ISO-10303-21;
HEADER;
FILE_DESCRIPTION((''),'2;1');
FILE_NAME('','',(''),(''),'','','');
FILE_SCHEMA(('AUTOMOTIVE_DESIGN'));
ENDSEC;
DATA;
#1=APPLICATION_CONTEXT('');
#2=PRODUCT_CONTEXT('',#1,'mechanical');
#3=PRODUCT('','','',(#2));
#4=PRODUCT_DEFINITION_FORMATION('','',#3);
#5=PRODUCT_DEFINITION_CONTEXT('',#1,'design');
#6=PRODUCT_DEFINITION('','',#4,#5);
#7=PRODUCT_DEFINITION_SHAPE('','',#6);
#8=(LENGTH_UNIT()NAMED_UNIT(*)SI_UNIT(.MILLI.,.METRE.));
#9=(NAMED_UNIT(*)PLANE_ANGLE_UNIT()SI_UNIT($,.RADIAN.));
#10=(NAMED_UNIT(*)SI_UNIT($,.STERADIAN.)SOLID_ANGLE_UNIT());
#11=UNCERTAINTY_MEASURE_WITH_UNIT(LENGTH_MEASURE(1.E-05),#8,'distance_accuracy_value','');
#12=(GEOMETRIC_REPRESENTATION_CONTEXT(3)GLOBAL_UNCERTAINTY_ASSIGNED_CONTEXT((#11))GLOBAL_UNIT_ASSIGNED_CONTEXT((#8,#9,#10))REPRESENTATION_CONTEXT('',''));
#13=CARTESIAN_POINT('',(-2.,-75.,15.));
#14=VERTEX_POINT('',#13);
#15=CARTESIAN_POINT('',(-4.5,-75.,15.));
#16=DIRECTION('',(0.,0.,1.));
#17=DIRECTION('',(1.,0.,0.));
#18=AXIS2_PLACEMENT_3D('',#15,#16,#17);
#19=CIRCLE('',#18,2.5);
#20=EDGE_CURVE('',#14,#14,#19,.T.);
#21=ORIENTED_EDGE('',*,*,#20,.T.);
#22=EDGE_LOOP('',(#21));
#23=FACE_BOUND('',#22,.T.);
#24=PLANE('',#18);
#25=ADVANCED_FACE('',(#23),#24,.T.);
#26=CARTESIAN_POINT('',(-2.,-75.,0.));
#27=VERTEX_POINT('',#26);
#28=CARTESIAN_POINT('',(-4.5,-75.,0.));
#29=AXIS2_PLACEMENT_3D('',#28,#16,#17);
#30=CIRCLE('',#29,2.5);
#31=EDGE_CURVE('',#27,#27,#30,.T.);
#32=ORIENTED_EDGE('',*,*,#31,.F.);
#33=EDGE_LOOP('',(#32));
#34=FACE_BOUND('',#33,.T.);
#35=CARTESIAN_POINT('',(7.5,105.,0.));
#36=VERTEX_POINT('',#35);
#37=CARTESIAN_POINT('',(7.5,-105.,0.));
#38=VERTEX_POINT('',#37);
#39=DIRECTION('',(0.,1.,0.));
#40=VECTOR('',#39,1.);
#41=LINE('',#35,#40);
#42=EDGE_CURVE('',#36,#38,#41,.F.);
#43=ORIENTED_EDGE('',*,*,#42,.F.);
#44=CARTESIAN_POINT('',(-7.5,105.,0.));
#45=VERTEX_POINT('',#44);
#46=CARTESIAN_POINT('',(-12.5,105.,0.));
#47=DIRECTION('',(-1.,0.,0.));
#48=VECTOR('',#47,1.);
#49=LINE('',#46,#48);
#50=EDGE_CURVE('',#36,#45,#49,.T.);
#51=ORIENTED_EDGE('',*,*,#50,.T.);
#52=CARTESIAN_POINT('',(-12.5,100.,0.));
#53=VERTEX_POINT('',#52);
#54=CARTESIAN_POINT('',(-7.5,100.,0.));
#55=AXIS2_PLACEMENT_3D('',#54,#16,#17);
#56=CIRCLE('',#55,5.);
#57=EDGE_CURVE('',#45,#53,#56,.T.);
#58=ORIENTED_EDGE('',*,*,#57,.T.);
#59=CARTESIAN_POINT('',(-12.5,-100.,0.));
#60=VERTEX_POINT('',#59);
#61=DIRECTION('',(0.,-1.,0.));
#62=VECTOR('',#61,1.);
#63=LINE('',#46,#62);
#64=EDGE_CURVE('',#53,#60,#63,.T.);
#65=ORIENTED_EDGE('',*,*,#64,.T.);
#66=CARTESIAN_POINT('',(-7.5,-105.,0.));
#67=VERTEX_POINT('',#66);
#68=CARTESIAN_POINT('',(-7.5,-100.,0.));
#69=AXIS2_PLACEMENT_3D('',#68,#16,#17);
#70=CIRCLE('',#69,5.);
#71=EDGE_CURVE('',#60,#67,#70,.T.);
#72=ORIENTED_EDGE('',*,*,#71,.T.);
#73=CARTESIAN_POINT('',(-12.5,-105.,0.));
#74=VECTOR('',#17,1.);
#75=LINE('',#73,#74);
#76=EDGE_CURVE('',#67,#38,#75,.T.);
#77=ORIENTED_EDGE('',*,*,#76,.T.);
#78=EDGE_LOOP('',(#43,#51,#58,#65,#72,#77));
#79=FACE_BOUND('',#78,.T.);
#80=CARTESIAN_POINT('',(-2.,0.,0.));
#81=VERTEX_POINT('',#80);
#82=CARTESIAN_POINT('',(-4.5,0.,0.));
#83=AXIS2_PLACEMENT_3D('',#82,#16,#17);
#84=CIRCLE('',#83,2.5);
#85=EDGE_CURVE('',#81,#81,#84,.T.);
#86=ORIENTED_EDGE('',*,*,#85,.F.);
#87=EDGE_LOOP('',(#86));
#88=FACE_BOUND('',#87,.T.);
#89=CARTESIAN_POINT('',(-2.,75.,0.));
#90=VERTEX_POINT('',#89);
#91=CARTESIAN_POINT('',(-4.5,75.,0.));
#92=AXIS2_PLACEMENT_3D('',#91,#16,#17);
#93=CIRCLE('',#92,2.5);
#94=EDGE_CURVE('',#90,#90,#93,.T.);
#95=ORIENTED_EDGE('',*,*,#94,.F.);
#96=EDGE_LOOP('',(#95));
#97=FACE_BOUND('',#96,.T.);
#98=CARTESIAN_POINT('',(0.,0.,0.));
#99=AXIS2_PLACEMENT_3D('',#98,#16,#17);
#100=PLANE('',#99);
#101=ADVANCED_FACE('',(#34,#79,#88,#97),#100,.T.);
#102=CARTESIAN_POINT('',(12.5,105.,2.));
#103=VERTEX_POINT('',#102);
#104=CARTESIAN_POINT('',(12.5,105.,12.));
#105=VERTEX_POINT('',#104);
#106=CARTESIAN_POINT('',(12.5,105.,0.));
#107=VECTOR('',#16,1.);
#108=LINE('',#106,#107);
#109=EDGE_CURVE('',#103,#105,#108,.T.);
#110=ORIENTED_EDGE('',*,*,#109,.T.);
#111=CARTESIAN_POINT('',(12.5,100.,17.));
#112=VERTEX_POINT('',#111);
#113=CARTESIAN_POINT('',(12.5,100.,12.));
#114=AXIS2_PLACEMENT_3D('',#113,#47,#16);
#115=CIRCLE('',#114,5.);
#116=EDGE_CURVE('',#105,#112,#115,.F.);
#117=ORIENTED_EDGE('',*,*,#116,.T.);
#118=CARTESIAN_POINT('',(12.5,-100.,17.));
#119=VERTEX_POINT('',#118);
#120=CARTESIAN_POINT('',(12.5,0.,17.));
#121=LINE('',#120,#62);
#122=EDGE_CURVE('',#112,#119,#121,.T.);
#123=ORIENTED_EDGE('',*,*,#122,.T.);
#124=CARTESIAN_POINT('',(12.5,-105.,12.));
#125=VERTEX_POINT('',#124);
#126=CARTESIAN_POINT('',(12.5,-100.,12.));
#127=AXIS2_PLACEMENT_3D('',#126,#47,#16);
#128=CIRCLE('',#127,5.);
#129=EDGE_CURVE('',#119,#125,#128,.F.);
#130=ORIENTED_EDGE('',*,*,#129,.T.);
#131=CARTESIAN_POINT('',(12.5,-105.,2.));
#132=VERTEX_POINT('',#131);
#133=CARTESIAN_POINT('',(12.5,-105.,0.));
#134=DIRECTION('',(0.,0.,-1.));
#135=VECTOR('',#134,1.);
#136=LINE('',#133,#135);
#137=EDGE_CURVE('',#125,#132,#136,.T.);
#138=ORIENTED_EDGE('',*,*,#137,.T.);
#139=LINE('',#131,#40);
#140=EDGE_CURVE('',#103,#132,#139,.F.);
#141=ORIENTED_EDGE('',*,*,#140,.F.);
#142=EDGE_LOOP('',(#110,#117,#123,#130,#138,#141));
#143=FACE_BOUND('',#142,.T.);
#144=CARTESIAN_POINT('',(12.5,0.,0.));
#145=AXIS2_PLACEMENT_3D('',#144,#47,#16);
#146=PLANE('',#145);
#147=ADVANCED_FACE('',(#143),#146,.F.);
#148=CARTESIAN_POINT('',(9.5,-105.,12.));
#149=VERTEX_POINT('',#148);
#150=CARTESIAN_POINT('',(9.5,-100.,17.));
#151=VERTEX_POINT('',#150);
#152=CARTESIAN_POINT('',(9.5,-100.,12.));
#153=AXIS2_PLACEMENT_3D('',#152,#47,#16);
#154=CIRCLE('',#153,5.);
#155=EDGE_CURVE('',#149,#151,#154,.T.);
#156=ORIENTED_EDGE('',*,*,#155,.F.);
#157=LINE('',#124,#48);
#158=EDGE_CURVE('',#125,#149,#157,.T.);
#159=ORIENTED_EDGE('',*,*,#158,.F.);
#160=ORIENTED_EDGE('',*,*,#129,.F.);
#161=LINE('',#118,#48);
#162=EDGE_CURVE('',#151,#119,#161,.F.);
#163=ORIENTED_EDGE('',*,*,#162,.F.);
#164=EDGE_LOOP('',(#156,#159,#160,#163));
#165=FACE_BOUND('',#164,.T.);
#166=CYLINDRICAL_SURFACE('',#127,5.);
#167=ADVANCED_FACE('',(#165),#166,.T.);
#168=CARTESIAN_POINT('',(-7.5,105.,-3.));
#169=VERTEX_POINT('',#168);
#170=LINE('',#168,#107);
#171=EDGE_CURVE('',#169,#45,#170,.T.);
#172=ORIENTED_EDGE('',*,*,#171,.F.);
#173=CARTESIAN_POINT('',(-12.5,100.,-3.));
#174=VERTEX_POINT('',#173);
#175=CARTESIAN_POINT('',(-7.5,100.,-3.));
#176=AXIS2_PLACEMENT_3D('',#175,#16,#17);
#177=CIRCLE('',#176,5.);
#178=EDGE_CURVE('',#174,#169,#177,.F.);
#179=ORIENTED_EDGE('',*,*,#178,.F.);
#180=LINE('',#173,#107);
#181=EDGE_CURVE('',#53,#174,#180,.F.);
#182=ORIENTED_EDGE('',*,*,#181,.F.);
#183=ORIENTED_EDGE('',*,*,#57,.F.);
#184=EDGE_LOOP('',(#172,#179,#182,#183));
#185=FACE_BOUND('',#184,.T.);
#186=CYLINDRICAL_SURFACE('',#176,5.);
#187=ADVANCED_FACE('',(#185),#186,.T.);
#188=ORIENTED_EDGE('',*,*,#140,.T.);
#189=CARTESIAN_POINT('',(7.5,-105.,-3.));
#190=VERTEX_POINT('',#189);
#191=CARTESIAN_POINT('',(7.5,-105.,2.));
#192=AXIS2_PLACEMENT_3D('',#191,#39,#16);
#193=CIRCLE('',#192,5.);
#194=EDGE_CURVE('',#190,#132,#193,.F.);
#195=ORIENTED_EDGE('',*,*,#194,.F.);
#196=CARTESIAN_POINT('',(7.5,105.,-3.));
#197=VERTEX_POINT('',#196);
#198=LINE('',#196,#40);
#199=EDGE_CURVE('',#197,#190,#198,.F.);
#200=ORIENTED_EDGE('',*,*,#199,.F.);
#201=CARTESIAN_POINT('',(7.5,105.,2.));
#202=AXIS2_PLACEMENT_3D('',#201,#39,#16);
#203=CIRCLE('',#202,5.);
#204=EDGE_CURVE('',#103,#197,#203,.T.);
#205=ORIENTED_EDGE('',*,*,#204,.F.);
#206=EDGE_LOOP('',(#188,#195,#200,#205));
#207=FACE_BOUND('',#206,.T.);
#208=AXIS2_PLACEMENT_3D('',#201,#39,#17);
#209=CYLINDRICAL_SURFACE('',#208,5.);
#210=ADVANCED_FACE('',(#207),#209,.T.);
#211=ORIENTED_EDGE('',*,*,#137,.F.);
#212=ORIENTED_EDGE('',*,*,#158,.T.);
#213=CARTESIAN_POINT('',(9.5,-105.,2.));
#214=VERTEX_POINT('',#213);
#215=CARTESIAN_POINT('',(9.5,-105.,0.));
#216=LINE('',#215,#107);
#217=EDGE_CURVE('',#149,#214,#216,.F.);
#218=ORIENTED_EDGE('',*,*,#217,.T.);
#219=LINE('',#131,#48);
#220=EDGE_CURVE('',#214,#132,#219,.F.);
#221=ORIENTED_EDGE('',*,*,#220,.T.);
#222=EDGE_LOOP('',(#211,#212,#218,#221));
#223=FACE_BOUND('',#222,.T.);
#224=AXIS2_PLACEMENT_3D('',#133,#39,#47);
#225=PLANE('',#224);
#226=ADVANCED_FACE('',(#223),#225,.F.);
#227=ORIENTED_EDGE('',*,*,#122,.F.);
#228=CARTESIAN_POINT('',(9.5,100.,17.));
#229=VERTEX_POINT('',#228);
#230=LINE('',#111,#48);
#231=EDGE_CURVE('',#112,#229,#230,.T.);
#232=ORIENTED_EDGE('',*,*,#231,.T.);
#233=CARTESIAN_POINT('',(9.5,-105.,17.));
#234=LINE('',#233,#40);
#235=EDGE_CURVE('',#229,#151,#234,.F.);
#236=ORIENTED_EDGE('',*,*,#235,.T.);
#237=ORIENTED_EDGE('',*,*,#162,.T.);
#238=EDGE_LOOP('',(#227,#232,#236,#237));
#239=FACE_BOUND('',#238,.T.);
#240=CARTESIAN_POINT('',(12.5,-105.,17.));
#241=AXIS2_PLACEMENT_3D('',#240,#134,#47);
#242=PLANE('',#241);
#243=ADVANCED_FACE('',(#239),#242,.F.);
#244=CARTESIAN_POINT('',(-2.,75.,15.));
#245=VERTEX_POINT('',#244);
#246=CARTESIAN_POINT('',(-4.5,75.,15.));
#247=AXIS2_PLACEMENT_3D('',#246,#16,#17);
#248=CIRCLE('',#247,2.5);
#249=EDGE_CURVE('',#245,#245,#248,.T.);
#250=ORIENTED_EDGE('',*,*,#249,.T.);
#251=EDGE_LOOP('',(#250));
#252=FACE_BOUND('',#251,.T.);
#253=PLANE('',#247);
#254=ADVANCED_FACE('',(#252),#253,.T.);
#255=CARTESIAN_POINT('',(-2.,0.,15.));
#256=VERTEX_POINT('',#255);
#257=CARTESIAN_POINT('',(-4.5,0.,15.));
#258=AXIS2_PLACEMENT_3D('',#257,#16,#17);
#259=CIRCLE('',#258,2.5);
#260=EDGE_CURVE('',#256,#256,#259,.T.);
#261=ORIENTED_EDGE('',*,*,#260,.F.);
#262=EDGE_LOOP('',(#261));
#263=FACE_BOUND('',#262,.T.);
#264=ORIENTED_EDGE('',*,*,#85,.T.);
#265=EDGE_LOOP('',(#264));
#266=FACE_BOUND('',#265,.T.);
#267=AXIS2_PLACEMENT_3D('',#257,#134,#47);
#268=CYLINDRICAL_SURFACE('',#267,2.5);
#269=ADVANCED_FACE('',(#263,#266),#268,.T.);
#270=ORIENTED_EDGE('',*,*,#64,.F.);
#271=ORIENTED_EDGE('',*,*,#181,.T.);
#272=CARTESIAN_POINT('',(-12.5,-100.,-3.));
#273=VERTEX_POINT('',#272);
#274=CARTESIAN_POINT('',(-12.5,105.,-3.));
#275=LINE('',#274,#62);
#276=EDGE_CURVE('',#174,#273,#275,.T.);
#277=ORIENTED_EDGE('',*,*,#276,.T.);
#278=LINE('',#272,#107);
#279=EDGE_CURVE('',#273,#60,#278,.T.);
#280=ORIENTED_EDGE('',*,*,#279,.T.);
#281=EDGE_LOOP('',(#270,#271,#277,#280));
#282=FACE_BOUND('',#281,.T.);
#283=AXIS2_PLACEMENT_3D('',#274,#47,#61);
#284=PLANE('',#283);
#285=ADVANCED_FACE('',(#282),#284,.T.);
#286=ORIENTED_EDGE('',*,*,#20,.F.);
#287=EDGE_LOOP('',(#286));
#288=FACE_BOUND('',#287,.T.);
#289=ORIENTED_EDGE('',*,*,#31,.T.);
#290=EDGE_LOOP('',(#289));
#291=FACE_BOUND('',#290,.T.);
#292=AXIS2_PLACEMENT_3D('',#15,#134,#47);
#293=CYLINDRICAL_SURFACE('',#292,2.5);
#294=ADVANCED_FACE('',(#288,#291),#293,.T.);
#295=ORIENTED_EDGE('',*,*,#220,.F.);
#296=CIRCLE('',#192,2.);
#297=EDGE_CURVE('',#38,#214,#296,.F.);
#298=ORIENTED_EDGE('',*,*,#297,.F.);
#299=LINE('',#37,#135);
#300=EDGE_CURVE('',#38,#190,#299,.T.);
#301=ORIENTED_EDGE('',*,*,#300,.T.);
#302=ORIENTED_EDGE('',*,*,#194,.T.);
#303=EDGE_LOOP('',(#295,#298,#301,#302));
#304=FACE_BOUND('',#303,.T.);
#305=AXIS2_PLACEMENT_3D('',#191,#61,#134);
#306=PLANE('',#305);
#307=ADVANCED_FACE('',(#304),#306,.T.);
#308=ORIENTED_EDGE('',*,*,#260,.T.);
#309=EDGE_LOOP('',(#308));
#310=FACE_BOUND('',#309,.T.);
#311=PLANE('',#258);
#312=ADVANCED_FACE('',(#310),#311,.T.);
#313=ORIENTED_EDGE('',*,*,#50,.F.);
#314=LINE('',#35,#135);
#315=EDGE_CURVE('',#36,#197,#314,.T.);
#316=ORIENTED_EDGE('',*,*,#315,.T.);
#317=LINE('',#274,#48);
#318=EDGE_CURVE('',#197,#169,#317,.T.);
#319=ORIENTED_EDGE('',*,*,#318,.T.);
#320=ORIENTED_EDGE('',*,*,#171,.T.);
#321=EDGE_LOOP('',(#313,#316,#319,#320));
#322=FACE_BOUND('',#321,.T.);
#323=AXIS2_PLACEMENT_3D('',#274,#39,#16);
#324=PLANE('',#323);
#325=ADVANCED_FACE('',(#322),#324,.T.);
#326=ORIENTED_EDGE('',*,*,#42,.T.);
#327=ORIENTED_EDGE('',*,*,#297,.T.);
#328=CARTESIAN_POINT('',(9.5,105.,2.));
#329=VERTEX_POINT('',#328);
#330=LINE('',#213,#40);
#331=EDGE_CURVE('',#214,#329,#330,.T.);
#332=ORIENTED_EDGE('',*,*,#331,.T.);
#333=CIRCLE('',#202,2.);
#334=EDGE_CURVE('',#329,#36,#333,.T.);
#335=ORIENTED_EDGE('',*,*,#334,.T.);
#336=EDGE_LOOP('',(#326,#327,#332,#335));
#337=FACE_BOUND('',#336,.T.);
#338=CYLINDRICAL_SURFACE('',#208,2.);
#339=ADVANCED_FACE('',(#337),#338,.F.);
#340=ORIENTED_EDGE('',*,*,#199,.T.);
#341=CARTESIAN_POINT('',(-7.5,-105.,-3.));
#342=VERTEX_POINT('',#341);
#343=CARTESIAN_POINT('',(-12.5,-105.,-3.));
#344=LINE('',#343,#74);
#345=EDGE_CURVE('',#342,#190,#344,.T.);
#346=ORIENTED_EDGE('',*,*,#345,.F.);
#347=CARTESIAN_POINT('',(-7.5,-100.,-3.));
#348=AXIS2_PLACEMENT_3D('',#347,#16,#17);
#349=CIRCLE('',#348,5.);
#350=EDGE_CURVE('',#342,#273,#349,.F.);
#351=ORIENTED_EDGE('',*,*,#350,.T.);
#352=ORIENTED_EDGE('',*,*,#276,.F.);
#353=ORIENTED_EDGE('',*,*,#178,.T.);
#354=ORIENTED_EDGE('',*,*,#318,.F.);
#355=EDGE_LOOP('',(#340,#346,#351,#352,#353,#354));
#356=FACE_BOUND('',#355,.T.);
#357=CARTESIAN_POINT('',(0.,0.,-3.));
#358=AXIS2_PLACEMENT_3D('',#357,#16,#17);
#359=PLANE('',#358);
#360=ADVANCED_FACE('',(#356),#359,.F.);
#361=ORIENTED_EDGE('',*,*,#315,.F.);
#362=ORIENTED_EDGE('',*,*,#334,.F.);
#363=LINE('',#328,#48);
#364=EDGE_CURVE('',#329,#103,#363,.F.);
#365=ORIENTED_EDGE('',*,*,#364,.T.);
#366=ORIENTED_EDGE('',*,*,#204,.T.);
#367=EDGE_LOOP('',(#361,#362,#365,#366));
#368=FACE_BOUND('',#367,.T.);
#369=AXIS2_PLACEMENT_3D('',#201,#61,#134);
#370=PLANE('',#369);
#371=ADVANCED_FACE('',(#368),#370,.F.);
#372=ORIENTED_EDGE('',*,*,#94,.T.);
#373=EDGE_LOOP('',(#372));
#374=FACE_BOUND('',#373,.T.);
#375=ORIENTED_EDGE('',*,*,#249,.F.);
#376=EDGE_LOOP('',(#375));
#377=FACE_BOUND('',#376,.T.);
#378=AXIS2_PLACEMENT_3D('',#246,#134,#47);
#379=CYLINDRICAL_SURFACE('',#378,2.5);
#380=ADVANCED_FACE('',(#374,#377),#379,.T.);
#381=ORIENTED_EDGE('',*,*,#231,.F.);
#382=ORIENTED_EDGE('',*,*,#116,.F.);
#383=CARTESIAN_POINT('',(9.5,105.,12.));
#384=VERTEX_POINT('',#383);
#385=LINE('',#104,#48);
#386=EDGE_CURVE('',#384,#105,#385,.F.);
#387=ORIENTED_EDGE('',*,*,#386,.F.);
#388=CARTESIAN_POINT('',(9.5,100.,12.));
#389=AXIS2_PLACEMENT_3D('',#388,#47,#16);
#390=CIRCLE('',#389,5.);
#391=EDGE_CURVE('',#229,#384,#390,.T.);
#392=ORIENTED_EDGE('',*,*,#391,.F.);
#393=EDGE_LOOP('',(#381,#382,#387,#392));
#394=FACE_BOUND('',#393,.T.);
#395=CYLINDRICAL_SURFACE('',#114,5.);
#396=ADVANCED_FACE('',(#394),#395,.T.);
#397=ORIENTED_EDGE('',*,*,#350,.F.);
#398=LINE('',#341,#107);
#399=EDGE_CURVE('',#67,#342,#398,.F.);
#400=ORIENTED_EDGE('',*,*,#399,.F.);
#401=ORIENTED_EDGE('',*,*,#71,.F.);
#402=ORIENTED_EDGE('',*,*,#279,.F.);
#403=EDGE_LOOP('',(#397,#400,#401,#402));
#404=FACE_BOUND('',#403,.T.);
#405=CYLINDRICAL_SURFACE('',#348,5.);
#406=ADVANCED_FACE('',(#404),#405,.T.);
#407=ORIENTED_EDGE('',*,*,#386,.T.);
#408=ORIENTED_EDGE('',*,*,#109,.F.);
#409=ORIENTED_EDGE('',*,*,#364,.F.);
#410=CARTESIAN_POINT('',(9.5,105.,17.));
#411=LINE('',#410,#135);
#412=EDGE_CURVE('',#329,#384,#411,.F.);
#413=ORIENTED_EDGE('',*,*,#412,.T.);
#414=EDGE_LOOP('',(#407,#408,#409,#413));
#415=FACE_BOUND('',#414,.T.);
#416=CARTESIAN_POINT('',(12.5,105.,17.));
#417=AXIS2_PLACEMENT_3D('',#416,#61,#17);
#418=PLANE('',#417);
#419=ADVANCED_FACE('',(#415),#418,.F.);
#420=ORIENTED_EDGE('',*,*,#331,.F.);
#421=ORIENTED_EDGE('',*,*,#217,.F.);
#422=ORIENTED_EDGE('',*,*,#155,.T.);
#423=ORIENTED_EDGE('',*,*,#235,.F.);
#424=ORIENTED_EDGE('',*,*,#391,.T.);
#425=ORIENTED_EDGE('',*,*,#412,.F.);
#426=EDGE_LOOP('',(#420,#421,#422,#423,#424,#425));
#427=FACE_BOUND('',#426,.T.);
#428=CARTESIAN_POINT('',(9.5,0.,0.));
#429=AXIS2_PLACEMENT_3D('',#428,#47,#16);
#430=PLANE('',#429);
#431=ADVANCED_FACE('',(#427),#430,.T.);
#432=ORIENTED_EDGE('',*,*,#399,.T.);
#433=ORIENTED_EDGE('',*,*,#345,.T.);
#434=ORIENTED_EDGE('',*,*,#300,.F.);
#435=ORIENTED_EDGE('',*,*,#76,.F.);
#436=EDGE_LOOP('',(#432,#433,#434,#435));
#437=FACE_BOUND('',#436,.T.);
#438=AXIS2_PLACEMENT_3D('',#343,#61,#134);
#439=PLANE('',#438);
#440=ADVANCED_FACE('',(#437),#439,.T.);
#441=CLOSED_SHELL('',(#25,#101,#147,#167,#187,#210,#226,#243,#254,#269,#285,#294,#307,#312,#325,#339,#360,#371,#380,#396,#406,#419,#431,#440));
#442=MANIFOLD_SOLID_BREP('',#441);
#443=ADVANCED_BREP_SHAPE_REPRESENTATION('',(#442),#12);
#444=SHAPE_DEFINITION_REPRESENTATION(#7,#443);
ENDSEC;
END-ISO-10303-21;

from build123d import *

# Parameters (mm, degrees)
SKETCH_1_W                       = 25
SKETCH_1_H                       = 210
SM_BASE_FLANGE_1_DEPTH           = 3
SM_EDGE_FLANGE_1_STRIP_W         = 16
SM_EDGE_FLANGE_1_STRIP_H         = 3
SM_EDGE_FLANGE_1_STRIP_CUT_DEPTH = 210
SM_EDGE_FLANGE_1_DEPTH           = 210
SKETCH_9_R                       = 2.5
EXTRUDE_1_DEPTH                  = 15
FILLET_1_R                       = 5


# Sheet-metal steps are written as plain solids
with BuildPart() as part:
    # Sketch 1 → 基体-法兰1 (new body)
    with BuildSketch(Plane.XY):
        Rectangle(SKETCH_1_W, SKETCH_1_H)
    extrude(amount=-SM_BASE_FLANGE_1_DEPTH)

    # 边线-法兰1 strip (across the edge) → 边线-法兰1 strip cut (cut)
    with BuildSketch(Plane(origin=(12.5, -105, 0), x_dir=(-1, 0, 0), z_dir=(0, 1, 0))):
        with Locations((-3, -1.5)):
            Rectangle(SM_EDGE_FLANGE_1_STRIP_W, SM_EDGE_FLANGE_1_STRIP_H)
    extrude(amount=SM_EDGE_FLANGE_1_STRIP_CUT_DEPTH, mode=Mode.SUBTRACT)

    # 边线-法兰1 section (across the edge) → 边线-法兰1 (add)
    with BuildSketch(Plane(origin=(12.5, -105, 0), x_dir=(-1, 0, 0), z_dir=(0, 1, 0))):
        with BuildLine():
            Line((0, 2), (0, 17))
            Line((0, 17), (3, 17))
            Line((3, 17), (3, 2))
            ThreePointArc((3, 2), (3.585786438, 0.585786438), (5, 0))
            Line((5, 0), (5, -3))
            ThreePointArc((5, -3), (1.464466094, -1.535533906), (0, 2))
        make_face()
    extrude(amount=SM_EDGE_FLANGE_1_DEPTH)

    # 草图9 → 凸台-拉伸1 (add)
    with BuildSketch(Plane.XY):
        with Locations((-4.5, 0)):
            Circle(SKETCH_9_R)
        with Locations((-4.5, -75)):
            Circle(SKETCH_9_R)
        with Locations((-4.5, 75)):
            Circle(SKETCH_9_R)
    extrude(amount=EXTRUDE_1_DEPTH)

    # 圆角1
    fillet_1_edges = [part.edges().sort_by_distance(p)[0] for p in [
        (11, -105, 17),
        (11, 105, 17),
        (-12.5, -105, -1.5),
        (-12.5, 105, -1.5),
    ]]
    fillet(fillet_1_edges, radius=FILLET_1_R)


solid = part.part
